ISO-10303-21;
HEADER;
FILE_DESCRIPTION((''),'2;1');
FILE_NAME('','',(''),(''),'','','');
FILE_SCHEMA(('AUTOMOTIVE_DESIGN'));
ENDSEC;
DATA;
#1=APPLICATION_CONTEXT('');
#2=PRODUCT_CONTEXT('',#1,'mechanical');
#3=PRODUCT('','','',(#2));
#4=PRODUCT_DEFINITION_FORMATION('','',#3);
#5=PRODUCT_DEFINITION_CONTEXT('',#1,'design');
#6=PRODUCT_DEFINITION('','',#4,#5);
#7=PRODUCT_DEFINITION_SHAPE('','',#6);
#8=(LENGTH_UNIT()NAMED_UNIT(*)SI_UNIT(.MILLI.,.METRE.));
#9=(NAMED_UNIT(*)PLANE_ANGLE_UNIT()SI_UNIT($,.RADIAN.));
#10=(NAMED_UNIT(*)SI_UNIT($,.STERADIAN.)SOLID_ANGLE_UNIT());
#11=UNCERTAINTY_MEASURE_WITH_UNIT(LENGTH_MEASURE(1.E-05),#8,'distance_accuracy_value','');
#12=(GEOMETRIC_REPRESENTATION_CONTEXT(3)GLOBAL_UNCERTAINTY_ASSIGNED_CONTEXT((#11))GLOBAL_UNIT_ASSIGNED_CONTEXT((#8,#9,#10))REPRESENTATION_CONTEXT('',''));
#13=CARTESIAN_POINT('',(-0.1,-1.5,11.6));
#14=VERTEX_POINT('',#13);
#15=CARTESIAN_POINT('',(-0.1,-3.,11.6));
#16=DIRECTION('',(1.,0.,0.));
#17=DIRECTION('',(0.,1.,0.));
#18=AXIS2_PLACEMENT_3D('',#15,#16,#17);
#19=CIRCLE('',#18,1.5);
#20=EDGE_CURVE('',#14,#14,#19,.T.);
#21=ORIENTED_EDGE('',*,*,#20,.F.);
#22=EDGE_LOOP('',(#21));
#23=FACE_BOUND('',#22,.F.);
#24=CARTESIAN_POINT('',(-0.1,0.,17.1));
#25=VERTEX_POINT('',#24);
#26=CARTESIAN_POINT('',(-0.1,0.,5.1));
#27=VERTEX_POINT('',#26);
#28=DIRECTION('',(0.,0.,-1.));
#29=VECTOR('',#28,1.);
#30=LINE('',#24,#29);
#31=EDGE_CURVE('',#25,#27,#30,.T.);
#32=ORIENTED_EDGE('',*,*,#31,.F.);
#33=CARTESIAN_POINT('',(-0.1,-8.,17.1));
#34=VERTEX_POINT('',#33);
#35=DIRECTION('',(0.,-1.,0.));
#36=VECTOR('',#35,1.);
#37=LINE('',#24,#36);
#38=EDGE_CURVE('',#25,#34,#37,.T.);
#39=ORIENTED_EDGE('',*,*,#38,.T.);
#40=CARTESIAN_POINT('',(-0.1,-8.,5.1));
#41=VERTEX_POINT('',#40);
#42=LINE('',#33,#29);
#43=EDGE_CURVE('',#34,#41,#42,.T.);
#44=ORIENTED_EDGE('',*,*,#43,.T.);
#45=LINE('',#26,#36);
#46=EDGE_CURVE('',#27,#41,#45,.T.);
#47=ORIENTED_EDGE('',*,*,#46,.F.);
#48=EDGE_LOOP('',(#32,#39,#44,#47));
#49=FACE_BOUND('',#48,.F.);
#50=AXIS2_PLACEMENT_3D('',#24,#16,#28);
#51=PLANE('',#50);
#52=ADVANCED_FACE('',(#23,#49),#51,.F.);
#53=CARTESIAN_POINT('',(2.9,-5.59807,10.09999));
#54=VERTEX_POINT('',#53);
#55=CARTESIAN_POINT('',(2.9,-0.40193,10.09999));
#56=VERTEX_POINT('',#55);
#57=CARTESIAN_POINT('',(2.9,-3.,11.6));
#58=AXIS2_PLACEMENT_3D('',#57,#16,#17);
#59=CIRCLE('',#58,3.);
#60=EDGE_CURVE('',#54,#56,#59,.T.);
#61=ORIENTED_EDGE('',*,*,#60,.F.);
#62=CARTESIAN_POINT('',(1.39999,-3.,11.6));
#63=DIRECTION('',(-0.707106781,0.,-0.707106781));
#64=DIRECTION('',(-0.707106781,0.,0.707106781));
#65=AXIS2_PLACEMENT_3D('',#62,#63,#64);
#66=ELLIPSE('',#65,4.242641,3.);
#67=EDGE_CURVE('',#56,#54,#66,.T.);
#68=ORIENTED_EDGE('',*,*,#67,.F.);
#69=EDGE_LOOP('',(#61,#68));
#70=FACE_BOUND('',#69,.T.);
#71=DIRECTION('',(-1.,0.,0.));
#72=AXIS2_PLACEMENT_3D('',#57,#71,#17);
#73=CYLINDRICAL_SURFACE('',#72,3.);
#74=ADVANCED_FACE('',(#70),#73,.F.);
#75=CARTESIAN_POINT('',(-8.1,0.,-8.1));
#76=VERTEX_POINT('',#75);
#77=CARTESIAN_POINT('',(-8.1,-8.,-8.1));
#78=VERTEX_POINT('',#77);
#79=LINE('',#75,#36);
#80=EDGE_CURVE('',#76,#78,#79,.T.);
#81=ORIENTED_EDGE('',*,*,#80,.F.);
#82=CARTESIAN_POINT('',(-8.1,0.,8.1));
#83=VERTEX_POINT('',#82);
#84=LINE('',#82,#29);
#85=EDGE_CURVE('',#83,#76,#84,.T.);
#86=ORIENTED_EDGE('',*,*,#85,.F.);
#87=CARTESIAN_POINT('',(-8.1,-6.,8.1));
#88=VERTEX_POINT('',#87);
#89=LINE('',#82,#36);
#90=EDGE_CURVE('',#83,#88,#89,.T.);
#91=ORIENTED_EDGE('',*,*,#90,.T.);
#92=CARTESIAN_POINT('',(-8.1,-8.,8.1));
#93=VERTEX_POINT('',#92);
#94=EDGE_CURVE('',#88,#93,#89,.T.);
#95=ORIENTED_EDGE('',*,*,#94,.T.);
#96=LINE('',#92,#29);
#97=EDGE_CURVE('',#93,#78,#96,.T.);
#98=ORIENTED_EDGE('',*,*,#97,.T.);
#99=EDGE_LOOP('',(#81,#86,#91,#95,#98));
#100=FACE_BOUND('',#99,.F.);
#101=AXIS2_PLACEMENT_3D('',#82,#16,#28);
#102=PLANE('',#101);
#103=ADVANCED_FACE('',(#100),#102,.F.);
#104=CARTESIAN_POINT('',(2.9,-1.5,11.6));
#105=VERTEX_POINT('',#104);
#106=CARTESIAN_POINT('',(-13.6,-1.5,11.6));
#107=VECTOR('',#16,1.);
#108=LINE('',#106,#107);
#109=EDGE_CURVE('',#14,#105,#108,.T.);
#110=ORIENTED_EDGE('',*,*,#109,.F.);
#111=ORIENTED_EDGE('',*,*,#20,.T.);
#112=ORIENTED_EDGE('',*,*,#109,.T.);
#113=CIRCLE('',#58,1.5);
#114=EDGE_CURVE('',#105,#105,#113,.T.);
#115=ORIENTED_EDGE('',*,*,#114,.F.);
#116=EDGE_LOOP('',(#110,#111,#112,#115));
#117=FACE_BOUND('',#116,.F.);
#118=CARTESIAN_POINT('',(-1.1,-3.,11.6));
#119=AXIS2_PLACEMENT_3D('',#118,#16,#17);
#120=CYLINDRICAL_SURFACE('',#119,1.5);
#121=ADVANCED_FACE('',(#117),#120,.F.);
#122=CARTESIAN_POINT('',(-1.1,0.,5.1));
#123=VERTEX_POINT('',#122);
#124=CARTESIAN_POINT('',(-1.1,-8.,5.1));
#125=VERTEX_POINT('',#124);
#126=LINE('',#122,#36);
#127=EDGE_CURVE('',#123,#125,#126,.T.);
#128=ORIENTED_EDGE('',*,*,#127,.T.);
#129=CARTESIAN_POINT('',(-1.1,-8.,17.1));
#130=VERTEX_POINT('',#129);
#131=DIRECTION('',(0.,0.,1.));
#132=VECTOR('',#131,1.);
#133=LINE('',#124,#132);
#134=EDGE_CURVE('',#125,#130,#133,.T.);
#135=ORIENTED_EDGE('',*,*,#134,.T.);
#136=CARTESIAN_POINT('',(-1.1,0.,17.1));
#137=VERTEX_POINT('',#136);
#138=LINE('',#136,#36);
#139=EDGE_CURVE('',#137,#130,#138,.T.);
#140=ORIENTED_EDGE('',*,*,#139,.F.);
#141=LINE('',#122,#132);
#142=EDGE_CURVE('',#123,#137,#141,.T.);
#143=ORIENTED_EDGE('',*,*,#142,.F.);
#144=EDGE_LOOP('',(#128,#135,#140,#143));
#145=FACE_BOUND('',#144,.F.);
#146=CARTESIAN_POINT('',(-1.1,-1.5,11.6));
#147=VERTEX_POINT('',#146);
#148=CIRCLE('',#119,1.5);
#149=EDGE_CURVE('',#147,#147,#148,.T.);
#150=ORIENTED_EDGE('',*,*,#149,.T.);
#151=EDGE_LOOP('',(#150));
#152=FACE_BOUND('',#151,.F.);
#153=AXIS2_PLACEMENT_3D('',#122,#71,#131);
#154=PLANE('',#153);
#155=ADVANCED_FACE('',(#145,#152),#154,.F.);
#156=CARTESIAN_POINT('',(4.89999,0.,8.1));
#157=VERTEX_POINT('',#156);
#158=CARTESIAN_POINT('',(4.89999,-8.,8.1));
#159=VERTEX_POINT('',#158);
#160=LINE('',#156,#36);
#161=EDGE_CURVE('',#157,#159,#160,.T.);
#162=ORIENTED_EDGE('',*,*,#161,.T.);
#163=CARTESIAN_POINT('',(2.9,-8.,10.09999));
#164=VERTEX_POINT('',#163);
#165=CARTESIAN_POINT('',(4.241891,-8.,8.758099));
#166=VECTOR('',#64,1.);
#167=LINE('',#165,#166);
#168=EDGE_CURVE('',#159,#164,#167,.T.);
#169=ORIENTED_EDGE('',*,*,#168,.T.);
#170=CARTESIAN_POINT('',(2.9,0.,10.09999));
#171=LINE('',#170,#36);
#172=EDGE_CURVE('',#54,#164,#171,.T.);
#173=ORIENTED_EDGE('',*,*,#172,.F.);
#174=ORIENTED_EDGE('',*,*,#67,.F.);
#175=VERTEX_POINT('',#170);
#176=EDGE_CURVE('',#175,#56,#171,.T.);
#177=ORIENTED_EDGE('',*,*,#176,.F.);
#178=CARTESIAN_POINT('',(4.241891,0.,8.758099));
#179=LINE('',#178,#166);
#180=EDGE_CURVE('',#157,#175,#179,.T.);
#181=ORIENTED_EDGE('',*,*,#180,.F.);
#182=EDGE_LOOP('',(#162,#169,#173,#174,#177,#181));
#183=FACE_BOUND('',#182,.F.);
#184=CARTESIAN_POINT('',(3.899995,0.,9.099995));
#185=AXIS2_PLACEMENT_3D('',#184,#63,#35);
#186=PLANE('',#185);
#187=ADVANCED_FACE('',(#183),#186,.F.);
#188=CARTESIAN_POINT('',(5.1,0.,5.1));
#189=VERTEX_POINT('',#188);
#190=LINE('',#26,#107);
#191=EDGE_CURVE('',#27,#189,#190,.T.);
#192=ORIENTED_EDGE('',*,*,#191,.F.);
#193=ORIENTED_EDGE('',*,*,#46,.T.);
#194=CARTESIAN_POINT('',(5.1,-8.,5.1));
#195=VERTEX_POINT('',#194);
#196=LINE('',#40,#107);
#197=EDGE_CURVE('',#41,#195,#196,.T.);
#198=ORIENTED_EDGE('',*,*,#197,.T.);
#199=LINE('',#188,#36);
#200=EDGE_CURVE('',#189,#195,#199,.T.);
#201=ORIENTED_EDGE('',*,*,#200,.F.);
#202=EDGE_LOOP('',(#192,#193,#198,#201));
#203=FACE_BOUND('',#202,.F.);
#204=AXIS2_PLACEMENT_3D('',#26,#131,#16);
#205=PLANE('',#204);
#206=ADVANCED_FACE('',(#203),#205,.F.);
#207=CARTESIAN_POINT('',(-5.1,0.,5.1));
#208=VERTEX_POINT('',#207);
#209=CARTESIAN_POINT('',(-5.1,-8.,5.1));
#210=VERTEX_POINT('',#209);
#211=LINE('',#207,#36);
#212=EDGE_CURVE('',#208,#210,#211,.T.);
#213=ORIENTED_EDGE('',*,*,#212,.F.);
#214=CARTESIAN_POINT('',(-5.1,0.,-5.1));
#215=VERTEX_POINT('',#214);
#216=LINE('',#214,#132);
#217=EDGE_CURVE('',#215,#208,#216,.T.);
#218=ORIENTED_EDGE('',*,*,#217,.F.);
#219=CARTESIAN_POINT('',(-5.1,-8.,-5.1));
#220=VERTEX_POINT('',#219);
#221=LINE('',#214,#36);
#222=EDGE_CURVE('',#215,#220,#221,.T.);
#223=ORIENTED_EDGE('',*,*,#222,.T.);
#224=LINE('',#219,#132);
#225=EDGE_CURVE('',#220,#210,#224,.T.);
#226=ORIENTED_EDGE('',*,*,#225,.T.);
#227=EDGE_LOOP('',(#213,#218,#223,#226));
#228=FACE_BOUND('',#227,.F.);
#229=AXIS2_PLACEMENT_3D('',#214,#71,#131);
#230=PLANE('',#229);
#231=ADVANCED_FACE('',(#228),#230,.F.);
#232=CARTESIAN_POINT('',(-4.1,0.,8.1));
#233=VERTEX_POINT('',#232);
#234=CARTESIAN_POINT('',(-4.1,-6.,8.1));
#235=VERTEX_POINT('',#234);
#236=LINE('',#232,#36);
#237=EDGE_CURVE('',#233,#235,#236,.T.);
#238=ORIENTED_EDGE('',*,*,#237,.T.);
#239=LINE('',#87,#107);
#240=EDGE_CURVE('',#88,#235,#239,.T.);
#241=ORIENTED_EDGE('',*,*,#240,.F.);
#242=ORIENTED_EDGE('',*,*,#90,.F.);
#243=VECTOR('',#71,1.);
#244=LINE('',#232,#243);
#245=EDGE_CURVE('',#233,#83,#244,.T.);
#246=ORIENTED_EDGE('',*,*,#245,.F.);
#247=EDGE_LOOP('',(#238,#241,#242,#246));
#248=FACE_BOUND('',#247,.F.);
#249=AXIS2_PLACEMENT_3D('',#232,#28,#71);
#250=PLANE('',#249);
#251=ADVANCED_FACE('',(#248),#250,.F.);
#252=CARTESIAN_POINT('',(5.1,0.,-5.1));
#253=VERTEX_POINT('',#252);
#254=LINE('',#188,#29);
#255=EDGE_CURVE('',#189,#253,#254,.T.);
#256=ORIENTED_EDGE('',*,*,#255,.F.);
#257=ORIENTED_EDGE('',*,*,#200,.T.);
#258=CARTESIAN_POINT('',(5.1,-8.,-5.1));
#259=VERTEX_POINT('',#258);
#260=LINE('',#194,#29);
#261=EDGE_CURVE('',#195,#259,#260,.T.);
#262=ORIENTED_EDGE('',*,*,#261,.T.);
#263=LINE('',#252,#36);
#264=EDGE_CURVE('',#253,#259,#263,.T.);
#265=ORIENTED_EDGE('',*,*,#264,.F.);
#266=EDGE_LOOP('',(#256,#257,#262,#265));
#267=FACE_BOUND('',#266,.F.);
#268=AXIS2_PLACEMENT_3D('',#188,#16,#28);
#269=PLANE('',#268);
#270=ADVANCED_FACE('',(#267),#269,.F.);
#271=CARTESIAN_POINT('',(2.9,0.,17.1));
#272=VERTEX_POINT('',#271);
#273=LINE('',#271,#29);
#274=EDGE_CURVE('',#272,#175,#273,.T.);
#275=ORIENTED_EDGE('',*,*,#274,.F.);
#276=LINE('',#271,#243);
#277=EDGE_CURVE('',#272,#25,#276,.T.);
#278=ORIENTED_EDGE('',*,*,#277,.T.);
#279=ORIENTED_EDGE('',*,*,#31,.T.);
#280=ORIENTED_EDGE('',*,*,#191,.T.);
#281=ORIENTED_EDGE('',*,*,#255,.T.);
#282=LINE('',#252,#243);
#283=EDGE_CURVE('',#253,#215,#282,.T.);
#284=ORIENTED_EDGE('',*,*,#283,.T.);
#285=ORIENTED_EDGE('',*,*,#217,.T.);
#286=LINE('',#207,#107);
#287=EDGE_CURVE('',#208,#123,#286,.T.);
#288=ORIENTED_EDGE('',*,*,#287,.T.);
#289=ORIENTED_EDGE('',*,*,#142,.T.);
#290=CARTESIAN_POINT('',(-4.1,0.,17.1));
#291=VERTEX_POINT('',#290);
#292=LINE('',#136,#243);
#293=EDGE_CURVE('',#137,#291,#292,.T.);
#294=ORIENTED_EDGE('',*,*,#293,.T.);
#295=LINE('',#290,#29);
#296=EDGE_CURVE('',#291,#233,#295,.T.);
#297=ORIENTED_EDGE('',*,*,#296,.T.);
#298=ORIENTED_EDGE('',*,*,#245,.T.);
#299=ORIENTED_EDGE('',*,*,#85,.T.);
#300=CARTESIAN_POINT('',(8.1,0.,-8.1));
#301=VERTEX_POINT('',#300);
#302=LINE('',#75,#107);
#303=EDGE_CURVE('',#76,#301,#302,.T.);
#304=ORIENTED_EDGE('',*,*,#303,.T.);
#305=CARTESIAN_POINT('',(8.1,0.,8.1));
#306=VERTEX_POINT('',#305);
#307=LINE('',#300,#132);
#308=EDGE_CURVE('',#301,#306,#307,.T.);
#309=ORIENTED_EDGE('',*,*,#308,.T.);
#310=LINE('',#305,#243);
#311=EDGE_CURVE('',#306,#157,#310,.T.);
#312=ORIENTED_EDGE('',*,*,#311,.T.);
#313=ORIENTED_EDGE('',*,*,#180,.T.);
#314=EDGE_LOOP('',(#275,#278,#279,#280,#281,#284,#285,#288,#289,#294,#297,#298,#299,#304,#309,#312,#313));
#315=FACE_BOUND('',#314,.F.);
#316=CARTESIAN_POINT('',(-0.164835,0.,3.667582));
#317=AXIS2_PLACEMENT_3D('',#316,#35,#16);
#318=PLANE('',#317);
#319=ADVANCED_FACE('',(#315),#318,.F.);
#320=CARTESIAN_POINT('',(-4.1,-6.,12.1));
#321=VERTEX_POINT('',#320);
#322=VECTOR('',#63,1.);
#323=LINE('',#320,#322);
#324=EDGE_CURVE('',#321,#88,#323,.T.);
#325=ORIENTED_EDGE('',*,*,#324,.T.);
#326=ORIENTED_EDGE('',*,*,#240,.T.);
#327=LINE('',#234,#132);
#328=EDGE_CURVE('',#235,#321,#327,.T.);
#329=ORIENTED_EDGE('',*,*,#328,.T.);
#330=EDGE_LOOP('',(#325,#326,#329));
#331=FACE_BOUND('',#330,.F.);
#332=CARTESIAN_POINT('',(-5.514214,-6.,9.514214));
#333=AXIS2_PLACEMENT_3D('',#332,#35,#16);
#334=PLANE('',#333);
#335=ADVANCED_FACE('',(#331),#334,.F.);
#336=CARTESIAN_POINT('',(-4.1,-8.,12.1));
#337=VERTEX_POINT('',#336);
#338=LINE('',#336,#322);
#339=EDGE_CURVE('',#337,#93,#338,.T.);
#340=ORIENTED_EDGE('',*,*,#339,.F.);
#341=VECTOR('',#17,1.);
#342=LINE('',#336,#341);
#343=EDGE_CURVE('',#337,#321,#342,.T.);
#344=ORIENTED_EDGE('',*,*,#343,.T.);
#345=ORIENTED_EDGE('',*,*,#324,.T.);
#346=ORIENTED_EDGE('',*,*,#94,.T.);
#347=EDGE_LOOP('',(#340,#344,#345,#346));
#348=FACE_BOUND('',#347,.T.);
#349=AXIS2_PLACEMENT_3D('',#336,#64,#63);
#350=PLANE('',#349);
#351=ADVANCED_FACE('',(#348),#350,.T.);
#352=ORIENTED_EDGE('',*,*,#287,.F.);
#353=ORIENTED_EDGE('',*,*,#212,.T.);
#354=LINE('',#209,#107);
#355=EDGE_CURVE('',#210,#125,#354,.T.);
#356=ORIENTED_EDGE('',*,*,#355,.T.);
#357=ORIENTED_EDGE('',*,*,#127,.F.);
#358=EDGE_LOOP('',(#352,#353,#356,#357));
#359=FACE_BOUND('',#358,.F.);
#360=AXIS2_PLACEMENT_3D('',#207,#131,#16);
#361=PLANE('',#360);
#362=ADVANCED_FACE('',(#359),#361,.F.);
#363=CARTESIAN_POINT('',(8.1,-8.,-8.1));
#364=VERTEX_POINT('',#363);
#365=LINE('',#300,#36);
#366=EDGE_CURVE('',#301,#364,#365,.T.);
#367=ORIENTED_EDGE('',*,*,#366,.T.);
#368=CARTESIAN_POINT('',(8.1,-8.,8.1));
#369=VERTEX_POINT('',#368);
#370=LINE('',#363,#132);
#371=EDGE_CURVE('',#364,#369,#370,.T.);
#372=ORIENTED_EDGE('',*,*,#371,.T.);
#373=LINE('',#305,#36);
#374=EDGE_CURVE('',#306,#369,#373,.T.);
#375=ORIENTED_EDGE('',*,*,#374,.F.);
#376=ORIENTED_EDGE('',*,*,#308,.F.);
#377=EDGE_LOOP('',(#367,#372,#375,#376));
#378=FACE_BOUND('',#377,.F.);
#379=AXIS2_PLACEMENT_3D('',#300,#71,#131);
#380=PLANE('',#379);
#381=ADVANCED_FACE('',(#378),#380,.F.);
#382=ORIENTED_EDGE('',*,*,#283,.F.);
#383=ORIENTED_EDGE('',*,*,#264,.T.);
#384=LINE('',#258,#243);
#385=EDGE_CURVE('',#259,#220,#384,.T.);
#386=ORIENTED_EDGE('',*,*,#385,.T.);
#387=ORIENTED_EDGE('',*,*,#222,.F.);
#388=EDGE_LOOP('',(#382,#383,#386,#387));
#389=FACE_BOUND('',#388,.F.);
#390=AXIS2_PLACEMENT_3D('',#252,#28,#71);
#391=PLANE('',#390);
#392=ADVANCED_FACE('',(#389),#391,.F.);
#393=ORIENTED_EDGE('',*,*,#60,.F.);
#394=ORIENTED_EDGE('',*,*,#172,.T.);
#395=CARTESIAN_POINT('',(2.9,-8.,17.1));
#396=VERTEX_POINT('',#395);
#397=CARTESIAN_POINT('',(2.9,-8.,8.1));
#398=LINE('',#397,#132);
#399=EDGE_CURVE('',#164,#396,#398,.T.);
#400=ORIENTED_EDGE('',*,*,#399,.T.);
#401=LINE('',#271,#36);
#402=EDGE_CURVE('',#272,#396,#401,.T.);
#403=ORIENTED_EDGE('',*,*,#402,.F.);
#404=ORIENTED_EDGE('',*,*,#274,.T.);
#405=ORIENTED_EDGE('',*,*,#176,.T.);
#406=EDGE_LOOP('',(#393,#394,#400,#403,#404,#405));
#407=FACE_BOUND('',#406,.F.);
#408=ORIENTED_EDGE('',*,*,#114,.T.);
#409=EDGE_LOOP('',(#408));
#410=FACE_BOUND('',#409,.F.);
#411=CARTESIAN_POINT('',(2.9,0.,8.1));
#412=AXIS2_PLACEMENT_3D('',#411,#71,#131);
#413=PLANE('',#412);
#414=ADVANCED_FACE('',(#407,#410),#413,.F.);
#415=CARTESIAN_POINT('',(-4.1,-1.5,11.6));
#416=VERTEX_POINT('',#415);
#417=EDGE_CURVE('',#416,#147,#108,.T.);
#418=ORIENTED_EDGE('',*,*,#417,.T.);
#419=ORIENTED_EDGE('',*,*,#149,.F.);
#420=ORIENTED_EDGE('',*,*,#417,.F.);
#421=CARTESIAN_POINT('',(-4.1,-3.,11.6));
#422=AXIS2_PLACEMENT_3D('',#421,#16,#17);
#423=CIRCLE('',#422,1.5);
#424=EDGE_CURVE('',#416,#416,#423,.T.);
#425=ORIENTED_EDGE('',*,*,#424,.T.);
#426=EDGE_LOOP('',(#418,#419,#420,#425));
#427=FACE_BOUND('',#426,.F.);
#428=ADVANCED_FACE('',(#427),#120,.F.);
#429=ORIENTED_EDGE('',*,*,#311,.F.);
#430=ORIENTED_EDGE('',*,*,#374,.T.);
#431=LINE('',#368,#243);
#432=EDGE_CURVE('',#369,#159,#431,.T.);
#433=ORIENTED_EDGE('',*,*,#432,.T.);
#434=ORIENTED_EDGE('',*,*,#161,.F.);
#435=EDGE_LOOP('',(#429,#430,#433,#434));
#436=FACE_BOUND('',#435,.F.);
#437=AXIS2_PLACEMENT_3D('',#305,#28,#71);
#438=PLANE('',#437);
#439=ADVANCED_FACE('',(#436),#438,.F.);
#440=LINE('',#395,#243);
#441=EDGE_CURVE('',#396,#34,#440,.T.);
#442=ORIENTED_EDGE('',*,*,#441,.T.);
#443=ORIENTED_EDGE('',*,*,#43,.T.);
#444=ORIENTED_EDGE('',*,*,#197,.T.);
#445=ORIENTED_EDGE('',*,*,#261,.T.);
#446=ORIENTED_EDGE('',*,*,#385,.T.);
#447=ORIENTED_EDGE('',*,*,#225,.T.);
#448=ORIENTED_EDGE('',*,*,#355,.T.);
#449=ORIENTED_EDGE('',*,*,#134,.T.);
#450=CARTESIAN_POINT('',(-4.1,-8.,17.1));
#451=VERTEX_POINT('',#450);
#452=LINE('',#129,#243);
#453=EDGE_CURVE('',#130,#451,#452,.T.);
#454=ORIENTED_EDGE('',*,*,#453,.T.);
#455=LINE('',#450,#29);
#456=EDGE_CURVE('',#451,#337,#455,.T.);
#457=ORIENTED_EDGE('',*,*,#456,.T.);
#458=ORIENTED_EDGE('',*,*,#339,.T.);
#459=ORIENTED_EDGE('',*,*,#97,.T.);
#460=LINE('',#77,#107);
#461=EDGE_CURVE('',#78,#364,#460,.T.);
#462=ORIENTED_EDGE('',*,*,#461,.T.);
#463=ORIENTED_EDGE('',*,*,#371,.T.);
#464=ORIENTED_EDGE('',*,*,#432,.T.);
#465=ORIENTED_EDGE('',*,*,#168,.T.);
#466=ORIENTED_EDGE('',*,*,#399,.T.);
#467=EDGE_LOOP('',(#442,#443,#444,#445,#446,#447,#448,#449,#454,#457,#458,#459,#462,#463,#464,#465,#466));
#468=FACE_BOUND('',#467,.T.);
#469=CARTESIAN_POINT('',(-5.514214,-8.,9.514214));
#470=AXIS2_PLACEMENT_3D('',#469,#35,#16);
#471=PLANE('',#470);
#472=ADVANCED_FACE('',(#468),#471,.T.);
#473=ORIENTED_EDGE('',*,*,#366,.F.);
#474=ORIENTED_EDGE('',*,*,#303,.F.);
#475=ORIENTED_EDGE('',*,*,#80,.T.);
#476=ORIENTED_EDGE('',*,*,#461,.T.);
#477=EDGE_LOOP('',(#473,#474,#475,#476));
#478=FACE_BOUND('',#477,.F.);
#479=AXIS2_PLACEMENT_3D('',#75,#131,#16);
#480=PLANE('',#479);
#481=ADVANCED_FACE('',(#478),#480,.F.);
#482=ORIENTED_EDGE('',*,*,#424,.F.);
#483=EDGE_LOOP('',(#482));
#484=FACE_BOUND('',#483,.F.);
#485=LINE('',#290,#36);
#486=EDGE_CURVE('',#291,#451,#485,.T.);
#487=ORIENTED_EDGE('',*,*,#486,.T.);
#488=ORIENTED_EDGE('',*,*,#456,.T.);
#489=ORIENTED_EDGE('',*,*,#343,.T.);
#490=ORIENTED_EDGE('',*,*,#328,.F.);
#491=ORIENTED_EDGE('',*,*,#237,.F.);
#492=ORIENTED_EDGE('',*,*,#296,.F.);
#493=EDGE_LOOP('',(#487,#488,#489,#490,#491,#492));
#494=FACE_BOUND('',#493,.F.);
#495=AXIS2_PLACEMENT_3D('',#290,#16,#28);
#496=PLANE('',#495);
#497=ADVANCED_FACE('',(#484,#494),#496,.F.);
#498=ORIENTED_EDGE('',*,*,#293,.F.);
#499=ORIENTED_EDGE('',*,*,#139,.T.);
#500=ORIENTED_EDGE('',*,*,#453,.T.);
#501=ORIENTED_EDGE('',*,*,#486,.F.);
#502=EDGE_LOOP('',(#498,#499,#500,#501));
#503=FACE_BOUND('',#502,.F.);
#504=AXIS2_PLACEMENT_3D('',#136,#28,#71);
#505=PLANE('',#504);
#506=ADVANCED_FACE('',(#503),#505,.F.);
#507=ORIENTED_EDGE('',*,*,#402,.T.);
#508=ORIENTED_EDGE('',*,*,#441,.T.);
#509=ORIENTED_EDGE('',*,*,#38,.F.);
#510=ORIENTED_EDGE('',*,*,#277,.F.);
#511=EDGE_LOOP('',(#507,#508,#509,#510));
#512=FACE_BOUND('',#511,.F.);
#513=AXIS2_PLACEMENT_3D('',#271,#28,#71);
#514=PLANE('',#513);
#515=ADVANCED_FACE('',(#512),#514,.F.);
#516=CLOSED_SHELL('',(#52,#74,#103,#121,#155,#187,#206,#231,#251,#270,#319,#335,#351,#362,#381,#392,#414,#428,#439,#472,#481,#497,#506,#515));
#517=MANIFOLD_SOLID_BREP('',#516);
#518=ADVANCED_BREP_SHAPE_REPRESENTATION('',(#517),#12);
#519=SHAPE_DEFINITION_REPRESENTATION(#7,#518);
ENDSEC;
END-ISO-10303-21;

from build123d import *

# Parameters (mm, degrees)
F1_DEPTH = 8
F2_R     = 1.5
F3_DEPTH = 12.5
F4_SIZE  = 1.99999
F5_R     = 3
F6_DEPTH = 4
F8_DEPTH = 2


# Not quite as in the source:
# - a fillet or chamfer is up to 0.001 mm smaller than in the source, because OpenCascade refuses the exact size


with BuildPart() as f1:
    # F0 (on Front) → F1 (new body)
    with BuildSketch(Plane.XZ):
        Polygon((5.1, 5.1), (5.1, -5.1), (-5.1, -5.1), (-5.1, 5.1), (-4.1, 5.1), (-1.1, 5.1), (-1.1, 8.1), (-1.1, 17.1), (-4.1, 17.1), (-4.1, 8.1), (-5.1, 8.1), (-8.1, 8.1), (-8.1, -8.1), (8.1, -8.1), (8.1, 8.1), (2.9, 8.1), (2.9, 17.1), (-0.1, 17.1), (-0.1, 8.1), (-0.1, 5.1), align=None)
    extrude(amount=F1_DEPTH)

    # F2 (on face) → F3 (cut, symmetric)
    with BuildSketch(Plane.YZ.offset(-1.1)):
        with Locations((-3, 11.6)):
            Circle(F2_R)
    extrude(amount=F3_DEPTH, both=True, mode=Mode.SUBTRACT)

    # F4 (size 2 in the source; OpenCascade refuses exactly that, so slightly less here)
    f4_edges = [f1.edges().sort_by_distance(p)[0] for p in [
        (2.9, -4, 8.1),
    ]]
    chamfer(f4_edges, length=F4_SIZE)

    # F5 (on face) → F6 (cut)
    with BuildSketch(Plane.YZ.offset(2.9)):
        with Locations((-3, 11.6)):
            Circle(F5_R)
    extrude(amount=F6_DEPTH, mode=Mode.SUBTRACT)

    # F7 (on face) → F8 (join)
    with BuildSketch(Plane.XZ.offset(8)):
        Polygon((-4.1, 12.1), (-8.1, 8.1), (-4.1, 8.1), align=None)
    extrude(amount=-F8_DEPTH)


solid = f1.part
